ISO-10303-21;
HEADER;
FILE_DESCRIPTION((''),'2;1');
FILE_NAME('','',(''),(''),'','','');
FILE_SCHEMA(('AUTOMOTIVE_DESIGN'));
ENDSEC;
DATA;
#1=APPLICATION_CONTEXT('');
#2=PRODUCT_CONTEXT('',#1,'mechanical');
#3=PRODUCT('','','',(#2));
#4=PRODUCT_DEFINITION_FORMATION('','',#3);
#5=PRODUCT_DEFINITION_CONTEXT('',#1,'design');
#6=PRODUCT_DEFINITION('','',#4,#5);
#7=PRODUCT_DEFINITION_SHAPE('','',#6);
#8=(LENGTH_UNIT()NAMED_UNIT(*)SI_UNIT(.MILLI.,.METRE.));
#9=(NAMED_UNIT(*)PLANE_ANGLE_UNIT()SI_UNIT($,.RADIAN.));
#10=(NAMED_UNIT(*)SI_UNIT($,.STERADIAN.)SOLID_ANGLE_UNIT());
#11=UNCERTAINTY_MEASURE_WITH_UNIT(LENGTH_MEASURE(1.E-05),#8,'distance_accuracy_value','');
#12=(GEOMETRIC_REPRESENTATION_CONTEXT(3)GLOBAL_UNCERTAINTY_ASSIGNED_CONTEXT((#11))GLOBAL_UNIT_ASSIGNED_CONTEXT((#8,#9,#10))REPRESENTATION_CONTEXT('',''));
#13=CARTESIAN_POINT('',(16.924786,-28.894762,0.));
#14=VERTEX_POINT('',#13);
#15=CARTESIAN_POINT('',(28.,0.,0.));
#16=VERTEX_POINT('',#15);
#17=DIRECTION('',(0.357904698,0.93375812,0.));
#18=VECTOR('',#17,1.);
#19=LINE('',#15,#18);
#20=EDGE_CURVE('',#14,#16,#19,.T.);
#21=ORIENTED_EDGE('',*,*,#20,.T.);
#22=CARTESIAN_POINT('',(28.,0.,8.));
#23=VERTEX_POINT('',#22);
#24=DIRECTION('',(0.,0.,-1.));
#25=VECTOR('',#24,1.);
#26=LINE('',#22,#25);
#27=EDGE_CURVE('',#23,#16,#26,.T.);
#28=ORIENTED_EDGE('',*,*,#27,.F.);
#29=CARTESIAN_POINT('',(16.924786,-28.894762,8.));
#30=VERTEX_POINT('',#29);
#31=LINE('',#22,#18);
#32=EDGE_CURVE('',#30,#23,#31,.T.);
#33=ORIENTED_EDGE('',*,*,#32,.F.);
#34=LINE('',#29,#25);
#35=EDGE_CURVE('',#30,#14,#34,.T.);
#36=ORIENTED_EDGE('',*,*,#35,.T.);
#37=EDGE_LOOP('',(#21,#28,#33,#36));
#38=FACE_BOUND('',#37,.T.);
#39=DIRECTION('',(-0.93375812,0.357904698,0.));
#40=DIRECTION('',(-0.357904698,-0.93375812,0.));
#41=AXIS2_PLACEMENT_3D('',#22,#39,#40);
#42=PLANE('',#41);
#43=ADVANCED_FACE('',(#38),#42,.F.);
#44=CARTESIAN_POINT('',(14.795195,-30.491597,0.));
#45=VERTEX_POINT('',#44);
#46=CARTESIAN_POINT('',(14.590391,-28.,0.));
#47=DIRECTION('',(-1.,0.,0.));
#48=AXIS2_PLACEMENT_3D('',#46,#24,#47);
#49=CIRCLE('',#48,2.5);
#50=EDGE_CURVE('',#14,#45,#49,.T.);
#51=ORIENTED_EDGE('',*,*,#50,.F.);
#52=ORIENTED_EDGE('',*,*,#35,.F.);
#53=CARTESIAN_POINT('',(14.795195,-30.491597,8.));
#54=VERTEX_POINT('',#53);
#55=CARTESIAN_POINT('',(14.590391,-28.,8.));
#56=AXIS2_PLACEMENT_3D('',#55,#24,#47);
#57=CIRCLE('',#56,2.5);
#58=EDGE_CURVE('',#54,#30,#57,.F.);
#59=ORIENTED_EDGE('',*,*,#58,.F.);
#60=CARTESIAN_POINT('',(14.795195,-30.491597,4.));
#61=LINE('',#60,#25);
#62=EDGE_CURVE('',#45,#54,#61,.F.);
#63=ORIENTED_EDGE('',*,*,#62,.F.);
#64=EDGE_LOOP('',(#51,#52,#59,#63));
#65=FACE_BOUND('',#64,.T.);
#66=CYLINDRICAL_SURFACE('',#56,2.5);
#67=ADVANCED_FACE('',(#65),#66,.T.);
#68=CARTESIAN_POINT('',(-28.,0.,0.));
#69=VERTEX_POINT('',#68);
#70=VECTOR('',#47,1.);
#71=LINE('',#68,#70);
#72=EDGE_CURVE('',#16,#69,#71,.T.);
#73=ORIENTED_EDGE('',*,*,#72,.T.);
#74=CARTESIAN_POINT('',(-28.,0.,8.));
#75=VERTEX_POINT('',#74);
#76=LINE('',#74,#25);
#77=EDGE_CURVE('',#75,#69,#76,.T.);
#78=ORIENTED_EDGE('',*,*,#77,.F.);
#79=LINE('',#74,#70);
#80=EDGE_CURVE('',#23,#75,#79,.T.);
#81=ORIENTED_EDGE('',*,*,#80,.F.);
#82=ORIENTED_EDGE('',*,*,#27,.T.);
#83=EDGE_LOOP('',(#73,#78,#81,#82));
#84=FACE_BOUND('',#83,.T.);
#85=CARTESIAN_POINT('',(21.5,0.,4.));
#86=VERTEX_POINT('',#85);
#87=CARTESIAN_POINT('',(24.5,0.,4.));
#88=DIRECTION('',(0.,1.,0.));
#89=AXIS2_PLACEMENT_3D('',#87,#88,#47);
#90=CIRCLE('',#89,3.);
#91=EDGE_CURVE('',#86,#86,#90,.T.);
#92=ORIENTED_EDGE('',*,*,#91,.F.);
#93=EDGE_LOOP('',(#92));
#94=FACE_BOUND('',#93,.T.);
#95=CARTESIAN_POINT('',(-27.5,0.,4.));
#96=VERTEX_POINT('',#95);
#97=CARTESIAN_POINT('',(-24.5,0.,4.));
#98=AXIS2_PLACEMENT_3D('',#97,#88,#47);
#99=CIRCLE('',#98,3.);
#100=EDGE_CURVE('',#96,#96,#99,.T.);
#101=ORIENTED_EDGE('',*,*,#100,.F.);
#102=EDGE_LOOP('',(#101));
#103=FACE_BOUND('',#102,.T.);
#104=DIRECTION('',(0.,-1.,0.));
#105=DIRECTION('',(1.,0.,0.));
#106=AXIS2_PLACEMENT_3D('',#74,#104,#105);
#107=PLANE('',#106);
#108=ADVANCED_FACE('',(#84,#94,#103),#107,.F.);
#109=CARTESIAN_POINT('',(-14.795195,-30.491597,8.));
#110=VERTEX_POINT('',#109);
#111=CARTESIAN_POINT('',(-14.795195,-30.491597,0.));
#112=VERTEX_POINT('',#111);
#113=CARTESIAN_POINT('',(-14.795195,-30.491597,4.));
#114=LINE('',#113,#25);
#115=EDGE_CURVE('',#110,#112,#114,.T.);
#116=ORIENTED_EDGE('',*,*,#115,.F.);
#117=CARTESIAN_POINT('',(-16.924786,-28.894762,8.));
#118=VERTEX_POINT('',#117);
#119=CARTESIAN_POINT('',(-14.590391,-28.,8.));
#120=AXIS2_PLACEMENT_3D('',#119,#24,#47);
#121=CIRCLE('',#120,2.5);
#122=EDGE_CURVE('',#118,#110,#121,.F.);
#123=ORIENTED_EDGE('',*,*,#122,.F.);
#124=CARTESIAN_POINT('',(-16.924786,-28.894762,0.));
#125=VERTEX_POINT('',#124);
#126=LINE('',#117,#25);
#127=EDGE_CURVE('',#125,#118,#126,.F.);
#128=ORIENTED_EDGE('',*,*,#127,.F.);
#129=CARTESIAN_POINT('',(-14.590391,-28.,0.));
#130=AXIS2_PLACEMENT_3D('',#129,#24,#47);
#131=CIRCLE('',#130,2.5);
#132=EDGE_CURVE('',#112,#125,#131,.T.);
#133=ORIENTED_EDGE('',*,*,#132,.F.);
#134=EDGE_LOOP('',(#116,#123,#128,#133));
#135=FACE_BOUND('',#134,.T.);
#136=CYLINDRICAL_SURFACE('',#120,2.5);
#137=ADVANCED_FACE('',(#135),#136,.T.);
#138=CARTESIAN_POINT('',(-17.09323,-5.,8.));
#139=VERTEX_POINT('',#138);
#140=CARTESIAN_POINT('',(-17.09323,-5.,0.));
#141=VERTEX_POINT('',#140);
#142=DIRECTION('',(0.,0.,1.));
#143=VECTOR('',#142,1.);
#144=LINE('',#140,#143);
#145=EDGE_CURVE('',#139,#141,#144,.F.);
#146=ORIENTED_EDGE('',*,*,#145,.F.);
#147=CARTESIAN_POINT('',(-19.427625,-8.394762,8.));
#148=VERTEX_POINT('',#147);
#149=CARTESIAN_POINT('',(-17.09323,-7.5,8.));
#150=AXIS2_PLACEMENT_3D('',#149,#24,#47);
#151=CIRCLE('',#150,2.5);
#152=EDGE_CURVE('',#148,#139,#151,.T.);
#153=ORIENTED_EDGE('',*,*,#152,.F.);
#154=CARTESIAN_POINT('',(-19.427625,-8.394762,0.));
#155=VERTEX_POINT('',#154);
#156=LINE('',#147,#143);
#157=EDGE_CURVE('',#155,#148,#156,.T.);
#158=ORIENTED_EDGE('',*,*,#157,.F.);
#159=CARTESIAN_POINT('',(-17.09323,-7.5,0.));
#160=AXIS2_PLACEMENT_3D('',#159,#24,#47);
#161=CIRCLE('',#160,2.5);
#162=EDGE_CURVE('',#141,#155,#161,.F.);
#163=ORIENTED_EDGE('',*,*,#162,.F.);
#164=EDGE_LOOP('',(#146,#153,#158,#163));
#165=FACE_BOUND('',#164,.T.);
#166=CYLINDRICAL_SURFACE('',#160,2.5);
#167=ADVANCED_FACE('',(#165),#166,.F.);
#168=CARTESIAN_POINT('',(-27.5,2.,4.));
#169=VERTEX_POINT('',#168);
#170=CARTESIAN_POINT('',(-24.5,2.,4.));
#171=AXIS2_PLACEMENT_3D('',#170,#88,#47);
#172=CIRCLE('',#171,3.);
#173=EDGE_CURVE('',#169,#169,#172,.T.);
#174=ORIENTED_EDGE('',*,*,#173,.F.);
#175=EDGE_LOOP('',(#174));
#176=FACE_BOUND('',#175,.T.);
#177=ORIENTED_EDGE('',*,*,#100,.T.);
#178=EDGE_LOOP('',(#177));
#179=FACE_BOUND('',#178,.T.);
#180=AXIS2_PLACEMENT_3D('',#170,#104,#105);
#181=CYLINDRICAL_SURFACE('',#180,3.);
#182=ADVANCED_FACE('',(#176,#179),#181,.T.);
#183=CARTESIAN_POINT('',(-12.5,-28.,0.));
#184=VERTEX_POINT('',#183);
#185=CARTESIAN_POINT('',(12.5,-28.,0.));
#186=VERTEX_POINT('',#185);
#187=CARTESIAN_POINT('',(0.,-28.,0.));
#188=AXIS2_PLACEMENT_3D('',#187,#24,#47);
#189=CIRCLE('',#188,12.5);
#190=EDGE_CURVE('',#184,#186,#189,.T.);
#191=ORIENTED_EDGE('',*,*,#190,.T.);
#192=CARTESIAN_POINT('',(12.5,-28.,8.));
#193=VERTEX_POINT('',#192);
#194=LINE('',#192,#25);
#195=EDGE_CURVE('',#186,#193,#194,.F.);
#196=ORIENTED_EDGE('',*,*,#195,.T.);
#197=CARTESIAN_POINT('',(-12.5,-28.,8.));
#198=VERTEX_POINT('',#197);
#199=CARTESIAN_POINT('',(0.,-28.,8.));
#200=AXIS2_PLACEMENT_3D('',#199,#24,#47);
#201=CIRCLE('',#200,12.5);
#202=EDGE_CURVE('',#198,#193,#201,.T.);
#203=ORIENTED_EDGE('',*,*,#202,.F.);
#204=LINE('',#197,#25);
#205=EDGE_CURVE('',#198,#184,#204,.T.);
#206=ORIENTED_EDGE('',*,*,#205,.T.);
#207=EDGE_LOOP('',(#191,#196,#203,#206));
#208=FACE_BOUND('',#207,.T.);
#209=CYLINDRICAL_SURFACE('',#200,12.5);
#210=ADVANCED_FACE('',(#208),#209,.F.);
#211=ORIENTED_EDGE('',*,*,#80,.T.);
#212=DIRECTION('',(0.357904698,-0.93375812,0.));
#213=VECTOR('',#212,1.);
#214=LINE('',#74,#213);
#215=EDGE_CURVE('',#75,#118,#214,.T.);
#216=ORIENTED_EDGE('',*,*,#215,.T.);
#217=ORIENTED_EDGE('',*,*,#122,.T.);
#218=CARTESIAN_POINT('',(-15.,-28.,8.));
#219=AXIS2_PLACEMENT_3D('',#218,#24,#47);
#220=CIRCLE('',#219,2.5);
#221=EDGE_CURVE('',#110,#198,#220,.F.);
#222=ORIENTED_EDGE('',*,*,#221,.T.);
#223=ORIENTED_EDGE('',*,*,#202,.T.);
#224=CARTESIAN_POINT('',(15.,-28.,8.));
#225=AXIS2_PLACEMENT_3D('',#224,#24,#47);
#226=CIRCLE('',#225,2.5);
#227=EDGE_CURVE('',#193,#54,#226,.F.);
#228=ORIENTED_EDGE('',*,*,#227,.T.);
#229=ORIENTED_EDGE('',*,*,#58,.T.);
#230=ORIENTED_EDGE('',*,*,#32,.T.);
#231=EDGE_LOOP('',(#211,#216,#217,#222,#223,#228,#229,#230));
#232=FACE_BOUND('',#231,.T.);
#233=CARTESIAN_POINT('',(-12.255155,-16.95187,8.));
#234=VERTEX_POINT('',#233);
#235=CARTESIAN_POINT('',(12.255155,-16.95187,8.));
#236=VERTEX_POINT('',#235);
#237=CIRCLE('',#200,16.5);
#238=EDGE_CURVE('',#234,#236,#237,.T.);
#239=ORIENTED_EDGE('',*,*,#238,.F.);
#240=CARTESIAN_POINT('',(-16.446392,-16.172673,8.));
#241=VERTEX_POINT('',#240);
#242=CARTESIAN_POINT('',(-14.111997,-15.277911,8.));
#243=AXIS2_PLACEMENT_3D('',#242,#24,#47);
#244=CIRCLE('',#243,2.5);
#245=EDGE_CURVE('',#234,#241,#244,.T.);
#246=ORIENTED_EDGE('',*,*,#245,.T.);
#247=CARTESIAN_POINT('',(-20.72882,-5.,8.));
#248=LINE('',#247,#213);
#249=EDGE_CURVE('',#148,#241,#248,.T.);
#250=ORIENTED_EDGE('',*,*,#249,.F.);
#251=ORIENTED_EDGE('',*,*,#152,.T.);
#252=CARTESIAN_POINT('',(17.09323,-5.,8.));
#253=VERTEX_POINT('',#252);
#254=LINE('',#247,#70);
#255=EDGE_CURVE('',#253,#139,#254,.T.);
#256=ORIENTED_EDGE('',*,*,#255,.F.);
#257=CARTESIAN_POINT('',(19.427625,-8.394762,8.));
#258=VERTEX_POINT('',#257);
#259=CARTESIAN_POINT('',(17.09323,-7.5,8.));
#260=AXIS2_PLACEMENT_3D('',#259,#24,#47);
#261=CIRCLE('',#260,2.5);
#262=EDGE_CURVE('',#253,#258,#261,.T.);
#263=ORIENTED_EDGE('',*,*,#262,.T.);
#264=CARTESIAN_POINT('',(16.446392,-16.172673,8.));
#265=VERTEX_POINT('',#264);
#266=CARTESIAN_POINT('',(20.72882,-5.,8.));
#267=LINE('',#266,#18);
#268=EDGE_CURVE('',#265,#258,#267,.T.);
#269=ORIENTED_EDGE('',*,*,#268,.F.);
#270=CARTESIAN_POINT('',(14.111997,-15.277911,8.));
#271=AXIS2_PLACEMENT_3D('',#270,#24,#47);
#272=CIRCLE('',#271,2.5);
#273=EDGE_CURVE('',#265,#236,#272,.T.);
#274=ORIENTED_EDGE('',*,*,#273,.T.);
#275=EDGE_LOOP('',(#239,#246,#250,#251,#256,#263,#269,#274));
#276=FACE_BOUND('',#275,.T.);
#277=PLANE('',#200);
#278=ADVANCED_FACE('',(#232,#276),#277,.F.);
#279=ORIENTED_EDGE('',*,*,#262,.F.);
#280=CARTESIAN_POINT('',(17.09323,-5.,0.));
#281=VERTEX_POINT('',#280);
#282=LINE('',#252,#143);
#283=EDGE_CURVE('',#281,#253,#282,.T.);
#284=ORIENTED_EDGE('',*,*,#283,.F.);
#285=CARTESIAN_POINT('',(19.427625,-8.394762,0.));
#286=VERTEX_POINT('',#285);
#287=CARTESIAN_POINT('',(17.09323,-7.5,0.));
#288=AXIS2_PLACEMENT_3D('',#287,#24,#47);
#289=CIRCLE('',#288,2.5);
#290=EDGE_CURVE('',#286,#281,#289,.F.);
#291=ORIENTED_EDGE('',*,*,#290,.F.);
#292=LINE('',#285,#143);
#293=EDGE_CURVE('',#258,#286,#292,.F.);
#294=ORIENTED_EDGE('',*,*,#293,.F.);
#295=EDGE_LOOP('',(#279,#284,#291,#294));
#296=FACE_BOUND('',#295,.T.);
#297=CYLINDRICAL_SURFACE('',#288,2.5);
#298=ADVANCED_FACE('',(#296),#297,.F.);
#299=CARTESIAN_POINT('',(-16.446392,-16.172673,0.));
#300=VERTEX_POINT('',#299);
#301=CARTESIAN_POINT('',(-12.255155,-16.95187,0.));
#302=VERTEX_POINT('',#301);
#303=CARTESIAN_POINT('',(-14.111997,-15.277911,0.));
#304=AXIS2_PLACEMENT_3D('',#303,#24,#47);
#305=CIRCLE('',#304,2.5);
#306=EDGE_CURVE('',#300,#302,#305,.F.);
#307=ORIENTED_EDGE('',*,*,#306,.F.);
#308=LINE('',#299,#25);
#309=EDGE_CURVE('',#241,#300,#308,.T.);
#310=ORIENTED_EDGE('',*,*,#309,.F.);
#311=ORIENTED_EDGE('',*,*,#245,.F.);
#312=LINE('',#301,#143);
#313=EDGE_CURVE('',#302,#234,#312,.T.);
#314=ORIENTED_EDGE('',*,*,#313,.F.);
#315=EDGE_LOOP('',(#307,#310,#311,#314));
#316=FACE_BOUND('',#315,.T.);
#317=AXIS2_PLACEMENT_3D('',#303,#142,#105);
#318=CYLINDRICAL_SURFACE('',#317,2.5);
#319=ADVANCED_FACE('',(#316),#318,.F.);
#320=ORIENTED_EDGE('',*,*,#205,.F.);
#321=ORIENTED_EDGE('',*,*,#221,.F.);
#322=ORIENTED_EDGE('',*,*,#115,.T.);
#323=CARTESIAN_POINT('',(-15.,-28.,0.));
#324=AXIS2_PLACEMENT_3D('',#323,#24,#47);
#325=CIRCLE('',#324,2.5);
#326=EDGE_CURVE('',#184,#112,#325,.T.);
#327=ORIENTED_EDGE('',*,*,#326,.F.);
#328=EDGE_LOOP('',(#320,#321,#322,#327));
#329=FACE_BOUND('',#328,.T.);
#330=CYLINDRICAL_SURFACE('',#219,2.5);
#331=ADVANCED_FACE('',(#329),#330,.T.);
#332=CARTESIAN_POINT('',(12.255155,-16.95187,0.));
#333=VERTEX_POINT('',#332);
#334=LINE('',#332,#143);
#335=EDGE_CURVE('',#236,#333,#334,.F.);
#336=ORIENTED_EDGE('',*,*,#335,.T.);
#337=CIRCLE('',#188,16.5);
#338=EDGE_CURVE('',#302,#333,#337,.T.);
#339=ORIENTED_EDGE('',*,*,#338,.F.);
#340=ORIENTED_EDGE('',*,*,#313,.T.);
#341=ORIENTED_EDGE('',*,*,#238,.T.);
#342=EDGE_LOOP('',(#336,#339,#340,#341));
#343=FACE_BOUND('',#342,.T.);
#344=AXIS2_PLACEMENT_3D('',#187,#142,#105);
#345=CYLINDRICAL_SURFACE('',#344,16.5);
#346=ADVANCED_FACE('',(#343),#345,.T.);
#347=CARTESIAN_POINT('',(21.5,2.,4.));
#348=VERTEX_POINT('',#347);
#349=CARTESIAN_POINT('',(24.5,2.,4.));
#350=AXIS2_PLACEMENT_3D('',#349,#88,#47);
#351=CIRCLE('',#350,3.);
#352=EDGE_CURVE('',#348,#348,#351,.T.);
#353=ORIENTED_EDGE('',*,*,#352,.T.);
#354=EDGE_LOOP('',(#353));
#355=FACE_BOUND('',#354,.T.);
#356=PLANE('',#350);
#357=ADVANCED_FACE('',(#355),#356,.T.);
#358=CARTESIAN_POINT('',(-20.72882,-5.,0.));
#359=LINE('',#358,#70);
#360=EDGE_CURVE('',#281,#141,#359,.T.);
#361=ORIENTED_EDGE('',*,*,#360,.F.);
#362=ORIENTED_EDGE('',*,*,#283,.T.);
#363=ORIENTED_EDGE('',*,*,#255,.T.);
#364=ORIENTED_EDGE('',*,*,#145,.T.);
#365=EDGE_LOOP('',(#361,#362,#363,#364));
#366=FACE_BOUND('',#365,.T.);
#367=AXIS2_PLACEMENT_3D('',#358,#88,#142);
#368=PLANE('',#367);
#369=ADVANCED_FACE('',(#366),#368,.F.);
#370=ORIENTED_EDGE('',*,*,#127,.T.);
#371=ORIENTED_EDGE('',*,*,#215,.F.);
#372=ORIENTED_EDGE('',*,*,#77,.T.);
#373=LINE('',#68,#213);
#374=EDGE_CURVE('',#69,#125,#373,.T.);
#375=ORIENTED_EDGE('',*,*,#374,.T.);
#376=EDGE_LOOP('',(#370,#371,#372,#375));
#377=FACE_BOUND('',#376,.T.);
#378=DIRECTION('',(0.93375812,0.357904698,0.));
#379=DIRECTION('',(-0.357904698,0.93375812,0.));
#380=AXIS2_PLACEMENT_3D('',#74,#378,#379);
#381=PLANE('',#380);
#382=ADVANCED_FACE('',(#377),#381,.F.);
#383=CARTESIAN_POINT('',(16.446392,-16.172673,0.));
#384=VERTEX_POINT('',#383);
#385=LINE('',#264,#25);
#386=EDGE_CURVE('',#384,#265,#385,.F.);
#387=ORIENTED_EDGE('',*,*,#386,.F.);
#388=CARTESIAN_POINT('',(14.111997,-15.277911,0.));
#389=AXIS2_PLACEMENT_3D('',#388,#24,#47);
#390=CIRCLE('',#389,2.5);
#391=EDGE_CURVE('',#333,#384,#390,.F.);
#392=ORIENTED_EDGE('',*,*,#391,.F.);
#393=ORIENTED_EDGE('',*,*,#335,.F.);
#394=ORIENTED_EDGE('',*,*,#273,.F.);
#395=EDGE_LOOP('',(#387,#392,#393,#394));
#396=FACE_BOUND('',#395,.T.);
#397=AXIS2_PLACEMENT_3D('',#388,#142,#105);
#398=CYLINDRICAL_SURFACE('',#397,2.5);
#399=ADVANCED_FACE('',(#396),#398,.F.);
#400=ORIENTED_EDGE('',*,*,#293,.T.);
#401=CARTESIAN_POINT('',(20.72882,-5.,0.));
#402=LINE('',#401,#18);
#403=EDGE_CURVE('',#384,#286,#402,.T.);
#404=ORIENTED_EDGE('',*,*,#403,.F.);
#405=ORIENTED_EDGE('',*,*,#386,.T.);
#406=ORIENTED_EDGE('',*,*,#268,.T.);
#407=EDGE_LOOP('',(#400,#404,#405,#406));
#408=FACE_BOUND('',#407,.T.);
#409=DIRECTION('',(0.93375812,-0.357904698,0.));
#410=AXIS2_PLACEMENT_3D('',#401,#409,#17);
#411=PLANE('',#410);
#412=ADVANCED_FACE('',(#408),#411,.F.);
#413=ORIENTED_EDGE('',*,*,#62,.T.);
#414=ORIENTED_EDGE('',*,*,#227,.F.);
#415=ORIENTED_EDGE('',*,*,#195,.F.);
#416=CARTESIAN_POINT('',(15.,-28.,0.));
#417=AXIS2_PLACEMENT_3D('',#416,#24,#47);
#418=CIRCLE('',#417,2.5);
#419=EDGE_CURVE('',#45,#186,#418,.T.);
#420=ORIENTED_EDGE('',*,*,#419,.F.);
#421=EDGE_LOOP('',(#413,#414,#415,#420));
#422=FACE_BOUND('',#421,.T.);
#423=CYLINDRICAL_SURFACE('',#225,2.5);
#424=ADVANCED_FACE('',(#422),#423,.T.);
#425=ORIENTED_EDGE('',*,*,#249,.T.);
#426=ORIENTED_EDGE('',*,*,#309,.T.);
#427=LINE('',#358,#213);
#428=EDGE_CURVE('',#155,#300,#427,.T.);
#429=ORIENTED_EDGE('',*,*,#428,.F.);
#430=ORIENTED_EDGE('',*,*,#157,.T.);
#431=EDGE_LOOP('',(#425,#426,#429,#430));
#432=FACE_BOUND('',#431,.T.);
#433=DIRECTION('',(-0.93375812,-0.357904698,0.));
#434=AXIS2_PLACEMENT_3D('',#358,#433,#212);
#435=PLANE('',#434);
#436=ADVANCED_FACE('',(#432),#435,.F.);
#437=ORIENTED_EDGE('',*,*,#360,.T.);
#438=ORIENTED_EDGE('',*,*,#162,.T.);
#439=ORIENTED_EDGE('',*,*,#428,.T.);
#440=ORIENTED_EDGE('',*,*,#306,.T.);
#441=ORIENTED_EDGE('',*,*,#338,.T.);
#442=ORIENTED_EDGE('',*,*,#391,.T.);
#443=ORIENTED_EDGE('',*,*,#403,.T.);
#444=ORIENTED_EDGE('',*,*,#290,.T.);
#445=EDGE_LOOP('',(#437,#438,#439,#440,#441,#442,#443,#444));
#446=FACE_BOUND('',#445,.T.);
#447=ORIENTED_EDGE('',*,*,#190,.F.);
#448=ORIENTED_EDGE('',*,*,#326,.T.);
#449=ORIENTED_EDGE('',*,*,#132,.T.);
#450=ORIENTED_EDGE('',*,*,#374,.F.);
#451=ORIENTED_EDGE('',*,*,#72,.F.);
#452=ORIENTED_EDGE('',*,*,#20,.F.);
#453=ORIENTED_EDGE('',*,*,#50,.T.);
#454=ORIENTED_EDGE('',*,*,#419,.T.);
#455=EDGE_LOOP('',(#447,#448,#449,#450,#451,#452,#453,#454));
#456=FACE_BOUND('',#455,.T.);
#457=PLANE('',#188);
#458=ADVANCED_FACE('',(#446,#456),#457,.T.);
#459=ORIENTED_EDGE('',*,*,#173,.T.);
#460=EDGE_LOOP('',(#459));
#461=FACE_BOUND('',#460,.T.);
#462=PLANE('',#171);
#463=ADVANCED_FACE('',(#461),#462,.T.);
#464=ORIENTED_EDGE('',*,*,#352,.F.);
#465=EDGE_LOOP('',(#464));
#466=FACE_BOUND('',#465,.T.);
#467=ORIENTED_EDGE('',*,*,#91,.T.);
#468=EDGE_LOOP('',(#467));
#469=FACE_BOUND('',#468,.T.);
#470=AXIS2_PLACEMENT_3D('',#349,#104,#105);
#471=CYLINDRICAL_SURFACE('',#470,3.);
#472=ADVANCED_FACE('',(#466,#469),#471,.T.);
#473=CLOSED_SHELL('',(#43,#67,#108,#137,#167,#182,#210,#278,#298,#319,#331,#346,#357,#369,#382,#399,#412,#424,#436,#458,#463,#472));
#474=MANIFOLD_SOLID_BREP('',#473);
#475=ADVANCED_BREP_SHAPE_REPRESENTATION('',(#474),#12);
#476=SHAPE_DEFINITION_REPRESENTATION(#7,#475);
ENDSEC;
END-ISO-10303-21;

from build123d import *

# Parameters (mm, degrees)
BOSS_EXTRUDE1_DEPTH = 8
CUT_EXTRUDE1_DEPTH  = 43.16930163
FILLET1_R           = 2.5
SKETCH3_R           = 3
BOSS_EXTRUDE2_DEPTH = 2


with BuildPart() as part:
    # Sketch1 → Boss-Extrude1 (new body)
    with BuildSketch(Plane.XY):
        with BuildLine():
            Line((-28, 0), (28, 0))
            Line((28, 0), (16.30950643, -30.5))
            Line((16.30950643, -30.5), (12.247448714, -30.5))
            ThreePointArc((12.247448714, -30.5), (0, -15.5), (-12.247448714, -30.5))
            Line((-12.247448714, -30.5), (-16.30950643, -30.5))
            Line((-16.30950643, -30.5), (-28, 0))
        make_face()
    extrude(amount=BOSS_EXTRUDE1_DEPTH)

    # Sketch2 → Cut-Extrude1 (cut, through all)
    with BuildSketch(Plane.XY.offset(8)):
        with BuildLine():
            Line((-20.728819868, -5), (-14.748606624, -20.602121746))
            ThreePointArc((-14.748606624, -20.602121746), (0, -11.5), (14.748606624, -20.602121746))
            Line((14.748606624, -20.602121746), (20.728819868, -5))
            Line((20.728819868, -5), (-20.728819868, -5))
        make_face()
    extrude(amount=-CUT_EXTRUDE1_DEPTH, mode=Mode.SUBTRACT)

    # Fillet1
    # the kernel refuses this fillet: 2.5 mm, written as the material it adds along each edge
    with BuildSketch(Plane(origin=(14.748606624, -20.602121746, 8), x_dir=(0.35790469832996064, 0.9337581201324783, 0), z_dir=(0, 0, -1))) as fillet1_piece_1:
        with BuildLine():
            CenterArc((4.743679492, -2.5), FILLET1_R, 90, 116.993489573)
            ThreePointArc((2.516034231, -3.634723133), (1.38029262, -1.732719809), (0, 0))
            Line((0, 0), (4.743679492, 0))
        make_face()
    extrude(amount=8)
    with BuildSketch(Plane(origin=(20.728819868, -5, 8), x_dir=(-0.35790469832996097, -0.9337581201324782, 0), z_dir=(0, 0, -1))) as fillet1_piece_2:
        with BuildLine():
            CenterArc((FILLET1_R * 1.4542360265, FILLET1_R), FILLET1_R, 159.028427988, 110.971572012)
            Line((FILLET1_R * 0.520477906364, FILLET1_R * 1.35790469833), (0, 0))
            Line((0, 0), (FILLET1_R * 1.4542360265, 0))
        make_face()
    extrude(amount=8)
    with BuildSketch(Plane(origin=(-20.728819868, -5, 8), x_dir=(0.35790469832996097, -0.9337581201324782, 0), z_dir=(0, 0, -1))) as fillet1_piece_3:
        with BuildLine():
            CenterArc((FILLET1_R * 1.4542360265, -FILLET1_R), FILLET1_R, 90, 110.971572012)
            Line((FILLET1_R * 0.520477906364, -FILLET1_R * 1.35790469833), (0, 0))
            Line((0, 0), (FILLET1_R * 1.4542360265, 0))
        make_face()
    extrude(amount=8)
    with BuildSketch(Plane(origin=(-14.748606624, -20.602121746, 8), x_dir=(0.5640537125230959, 0.8257380997561593, 0), z_dir=(0, 0, -1))) as fillet1_piece_4:
        with BuildLine():
            CenterArc((4.755486169, -2.477467743), FILLET1_R, 97.698333221, 116.993489574)
            Line((2.69992297, -3.900373197), (0, 0))
            ThreePointArc((0, 0), (2.210296389, -0.148712899), (4.420592777, 0))
        make_face()
    extrude(amount=8)
    # the kernel refuses this fillet: 2.5 mm, written as the material it takes off along each edge
    with BuildSketch(Plane(origin=(12.247448714, -30.5, -6.881378215), x_dir=(1, 0, 0), z_dir=(0, 0, 1))) as fillet1_2_piece_1:
        with BuildLine():
            CenterArc((2.752551286, 2.5), FILLET1_R, 180, 90)
            ThreePointArc((0.252551286, 2.5), (0.189253199, 1.243637975), (0, 0))
            Line((0, 0), (2.752551286, 0))
        make_face()
    extrude(amount=21.76275643, mode=Mode.SUBTRACT)
    with BuildSketch(Plane(origin=(16.30950643, -30.5, -4.297789276), x_dir=(0.3579046983299623, 0.9337581201324777, 0), z_dir=(0, 0, 1))) as fillet1_2_piece_2:
        with BuildLine():
            CenterArc((FILLET1_R * 0.687646284221, FILLET1_R), FILLET1_R, 200.971572012, 69.028427988)
            Line((-FILLET1_R * 0.246111835912, FILLET1_R * 0.64209530167), (0, 0))
            Line((0, 0), (FILLET1_R * 0.687646284221, 0))
        make_face()
    extrude(amount=16.595578553, mode=Mode.SUBTRACT)
    with BuildSketch(Plane(origin=(-12.247448714, -30.5, -6.881378215), x_dir=(-1, 0, 0), z_dir=(0, 0, 1))) as fillet1_2_piece_3:
        with BuildLine():
            CenterArc((2.752551286, -2.5), FILLET1_R, 90, 90)
            ThreePointArc((0.252551286, -2.5), (0.189253199, -1.243637975), (0, 0))
            Line((0, 0), (2.752551286, 0))
        make_face()
    extrude(amount=21.76275643, mode=Mode.SUBTRACT)
    with BuildSketch(Plane(origin=(-16.30950643, -30.5, -4.297789276), x_dir=(-0.3579046983299605, 0.9337581201324784, 0), z_dir=(0, 0, 1))) as fillet1_2_piece_4:
        with BuildLine():
            CenterArc((FILLET1_R * 0.687646284221, -FILLET1_R), FILLET1_R, 90, 69.028427988)
            Line((-FILLET1_R * 0.246111835912, -FILLET1_R * 0.64209530167), (0, 0))
            Line((0, 0), (FILLET1_R * 0.687646284221, 0))
        make_face()
    extrude(amount=16.595578553, mode=Mode.SUBTRACT)

    # Sketch3 → Boss-Extrude2 (add)
    with BuildSketch(Plane(origin=(0, 0, 0), x_dir=(1, 0, 0), z_dir=(0, 1, 0))):
        with Locations(Location((-24.5, -4, 0), (0, 0, 180))):
            Circle(SKETCH3_R)
        with Locations(Location((24.5, -4, 0), (0, 0, 180))):
            Circle(SKETCH3_R)
    extrude(amount=BOSS_EXTRUDE2_DEPTH)


solid = part.part
